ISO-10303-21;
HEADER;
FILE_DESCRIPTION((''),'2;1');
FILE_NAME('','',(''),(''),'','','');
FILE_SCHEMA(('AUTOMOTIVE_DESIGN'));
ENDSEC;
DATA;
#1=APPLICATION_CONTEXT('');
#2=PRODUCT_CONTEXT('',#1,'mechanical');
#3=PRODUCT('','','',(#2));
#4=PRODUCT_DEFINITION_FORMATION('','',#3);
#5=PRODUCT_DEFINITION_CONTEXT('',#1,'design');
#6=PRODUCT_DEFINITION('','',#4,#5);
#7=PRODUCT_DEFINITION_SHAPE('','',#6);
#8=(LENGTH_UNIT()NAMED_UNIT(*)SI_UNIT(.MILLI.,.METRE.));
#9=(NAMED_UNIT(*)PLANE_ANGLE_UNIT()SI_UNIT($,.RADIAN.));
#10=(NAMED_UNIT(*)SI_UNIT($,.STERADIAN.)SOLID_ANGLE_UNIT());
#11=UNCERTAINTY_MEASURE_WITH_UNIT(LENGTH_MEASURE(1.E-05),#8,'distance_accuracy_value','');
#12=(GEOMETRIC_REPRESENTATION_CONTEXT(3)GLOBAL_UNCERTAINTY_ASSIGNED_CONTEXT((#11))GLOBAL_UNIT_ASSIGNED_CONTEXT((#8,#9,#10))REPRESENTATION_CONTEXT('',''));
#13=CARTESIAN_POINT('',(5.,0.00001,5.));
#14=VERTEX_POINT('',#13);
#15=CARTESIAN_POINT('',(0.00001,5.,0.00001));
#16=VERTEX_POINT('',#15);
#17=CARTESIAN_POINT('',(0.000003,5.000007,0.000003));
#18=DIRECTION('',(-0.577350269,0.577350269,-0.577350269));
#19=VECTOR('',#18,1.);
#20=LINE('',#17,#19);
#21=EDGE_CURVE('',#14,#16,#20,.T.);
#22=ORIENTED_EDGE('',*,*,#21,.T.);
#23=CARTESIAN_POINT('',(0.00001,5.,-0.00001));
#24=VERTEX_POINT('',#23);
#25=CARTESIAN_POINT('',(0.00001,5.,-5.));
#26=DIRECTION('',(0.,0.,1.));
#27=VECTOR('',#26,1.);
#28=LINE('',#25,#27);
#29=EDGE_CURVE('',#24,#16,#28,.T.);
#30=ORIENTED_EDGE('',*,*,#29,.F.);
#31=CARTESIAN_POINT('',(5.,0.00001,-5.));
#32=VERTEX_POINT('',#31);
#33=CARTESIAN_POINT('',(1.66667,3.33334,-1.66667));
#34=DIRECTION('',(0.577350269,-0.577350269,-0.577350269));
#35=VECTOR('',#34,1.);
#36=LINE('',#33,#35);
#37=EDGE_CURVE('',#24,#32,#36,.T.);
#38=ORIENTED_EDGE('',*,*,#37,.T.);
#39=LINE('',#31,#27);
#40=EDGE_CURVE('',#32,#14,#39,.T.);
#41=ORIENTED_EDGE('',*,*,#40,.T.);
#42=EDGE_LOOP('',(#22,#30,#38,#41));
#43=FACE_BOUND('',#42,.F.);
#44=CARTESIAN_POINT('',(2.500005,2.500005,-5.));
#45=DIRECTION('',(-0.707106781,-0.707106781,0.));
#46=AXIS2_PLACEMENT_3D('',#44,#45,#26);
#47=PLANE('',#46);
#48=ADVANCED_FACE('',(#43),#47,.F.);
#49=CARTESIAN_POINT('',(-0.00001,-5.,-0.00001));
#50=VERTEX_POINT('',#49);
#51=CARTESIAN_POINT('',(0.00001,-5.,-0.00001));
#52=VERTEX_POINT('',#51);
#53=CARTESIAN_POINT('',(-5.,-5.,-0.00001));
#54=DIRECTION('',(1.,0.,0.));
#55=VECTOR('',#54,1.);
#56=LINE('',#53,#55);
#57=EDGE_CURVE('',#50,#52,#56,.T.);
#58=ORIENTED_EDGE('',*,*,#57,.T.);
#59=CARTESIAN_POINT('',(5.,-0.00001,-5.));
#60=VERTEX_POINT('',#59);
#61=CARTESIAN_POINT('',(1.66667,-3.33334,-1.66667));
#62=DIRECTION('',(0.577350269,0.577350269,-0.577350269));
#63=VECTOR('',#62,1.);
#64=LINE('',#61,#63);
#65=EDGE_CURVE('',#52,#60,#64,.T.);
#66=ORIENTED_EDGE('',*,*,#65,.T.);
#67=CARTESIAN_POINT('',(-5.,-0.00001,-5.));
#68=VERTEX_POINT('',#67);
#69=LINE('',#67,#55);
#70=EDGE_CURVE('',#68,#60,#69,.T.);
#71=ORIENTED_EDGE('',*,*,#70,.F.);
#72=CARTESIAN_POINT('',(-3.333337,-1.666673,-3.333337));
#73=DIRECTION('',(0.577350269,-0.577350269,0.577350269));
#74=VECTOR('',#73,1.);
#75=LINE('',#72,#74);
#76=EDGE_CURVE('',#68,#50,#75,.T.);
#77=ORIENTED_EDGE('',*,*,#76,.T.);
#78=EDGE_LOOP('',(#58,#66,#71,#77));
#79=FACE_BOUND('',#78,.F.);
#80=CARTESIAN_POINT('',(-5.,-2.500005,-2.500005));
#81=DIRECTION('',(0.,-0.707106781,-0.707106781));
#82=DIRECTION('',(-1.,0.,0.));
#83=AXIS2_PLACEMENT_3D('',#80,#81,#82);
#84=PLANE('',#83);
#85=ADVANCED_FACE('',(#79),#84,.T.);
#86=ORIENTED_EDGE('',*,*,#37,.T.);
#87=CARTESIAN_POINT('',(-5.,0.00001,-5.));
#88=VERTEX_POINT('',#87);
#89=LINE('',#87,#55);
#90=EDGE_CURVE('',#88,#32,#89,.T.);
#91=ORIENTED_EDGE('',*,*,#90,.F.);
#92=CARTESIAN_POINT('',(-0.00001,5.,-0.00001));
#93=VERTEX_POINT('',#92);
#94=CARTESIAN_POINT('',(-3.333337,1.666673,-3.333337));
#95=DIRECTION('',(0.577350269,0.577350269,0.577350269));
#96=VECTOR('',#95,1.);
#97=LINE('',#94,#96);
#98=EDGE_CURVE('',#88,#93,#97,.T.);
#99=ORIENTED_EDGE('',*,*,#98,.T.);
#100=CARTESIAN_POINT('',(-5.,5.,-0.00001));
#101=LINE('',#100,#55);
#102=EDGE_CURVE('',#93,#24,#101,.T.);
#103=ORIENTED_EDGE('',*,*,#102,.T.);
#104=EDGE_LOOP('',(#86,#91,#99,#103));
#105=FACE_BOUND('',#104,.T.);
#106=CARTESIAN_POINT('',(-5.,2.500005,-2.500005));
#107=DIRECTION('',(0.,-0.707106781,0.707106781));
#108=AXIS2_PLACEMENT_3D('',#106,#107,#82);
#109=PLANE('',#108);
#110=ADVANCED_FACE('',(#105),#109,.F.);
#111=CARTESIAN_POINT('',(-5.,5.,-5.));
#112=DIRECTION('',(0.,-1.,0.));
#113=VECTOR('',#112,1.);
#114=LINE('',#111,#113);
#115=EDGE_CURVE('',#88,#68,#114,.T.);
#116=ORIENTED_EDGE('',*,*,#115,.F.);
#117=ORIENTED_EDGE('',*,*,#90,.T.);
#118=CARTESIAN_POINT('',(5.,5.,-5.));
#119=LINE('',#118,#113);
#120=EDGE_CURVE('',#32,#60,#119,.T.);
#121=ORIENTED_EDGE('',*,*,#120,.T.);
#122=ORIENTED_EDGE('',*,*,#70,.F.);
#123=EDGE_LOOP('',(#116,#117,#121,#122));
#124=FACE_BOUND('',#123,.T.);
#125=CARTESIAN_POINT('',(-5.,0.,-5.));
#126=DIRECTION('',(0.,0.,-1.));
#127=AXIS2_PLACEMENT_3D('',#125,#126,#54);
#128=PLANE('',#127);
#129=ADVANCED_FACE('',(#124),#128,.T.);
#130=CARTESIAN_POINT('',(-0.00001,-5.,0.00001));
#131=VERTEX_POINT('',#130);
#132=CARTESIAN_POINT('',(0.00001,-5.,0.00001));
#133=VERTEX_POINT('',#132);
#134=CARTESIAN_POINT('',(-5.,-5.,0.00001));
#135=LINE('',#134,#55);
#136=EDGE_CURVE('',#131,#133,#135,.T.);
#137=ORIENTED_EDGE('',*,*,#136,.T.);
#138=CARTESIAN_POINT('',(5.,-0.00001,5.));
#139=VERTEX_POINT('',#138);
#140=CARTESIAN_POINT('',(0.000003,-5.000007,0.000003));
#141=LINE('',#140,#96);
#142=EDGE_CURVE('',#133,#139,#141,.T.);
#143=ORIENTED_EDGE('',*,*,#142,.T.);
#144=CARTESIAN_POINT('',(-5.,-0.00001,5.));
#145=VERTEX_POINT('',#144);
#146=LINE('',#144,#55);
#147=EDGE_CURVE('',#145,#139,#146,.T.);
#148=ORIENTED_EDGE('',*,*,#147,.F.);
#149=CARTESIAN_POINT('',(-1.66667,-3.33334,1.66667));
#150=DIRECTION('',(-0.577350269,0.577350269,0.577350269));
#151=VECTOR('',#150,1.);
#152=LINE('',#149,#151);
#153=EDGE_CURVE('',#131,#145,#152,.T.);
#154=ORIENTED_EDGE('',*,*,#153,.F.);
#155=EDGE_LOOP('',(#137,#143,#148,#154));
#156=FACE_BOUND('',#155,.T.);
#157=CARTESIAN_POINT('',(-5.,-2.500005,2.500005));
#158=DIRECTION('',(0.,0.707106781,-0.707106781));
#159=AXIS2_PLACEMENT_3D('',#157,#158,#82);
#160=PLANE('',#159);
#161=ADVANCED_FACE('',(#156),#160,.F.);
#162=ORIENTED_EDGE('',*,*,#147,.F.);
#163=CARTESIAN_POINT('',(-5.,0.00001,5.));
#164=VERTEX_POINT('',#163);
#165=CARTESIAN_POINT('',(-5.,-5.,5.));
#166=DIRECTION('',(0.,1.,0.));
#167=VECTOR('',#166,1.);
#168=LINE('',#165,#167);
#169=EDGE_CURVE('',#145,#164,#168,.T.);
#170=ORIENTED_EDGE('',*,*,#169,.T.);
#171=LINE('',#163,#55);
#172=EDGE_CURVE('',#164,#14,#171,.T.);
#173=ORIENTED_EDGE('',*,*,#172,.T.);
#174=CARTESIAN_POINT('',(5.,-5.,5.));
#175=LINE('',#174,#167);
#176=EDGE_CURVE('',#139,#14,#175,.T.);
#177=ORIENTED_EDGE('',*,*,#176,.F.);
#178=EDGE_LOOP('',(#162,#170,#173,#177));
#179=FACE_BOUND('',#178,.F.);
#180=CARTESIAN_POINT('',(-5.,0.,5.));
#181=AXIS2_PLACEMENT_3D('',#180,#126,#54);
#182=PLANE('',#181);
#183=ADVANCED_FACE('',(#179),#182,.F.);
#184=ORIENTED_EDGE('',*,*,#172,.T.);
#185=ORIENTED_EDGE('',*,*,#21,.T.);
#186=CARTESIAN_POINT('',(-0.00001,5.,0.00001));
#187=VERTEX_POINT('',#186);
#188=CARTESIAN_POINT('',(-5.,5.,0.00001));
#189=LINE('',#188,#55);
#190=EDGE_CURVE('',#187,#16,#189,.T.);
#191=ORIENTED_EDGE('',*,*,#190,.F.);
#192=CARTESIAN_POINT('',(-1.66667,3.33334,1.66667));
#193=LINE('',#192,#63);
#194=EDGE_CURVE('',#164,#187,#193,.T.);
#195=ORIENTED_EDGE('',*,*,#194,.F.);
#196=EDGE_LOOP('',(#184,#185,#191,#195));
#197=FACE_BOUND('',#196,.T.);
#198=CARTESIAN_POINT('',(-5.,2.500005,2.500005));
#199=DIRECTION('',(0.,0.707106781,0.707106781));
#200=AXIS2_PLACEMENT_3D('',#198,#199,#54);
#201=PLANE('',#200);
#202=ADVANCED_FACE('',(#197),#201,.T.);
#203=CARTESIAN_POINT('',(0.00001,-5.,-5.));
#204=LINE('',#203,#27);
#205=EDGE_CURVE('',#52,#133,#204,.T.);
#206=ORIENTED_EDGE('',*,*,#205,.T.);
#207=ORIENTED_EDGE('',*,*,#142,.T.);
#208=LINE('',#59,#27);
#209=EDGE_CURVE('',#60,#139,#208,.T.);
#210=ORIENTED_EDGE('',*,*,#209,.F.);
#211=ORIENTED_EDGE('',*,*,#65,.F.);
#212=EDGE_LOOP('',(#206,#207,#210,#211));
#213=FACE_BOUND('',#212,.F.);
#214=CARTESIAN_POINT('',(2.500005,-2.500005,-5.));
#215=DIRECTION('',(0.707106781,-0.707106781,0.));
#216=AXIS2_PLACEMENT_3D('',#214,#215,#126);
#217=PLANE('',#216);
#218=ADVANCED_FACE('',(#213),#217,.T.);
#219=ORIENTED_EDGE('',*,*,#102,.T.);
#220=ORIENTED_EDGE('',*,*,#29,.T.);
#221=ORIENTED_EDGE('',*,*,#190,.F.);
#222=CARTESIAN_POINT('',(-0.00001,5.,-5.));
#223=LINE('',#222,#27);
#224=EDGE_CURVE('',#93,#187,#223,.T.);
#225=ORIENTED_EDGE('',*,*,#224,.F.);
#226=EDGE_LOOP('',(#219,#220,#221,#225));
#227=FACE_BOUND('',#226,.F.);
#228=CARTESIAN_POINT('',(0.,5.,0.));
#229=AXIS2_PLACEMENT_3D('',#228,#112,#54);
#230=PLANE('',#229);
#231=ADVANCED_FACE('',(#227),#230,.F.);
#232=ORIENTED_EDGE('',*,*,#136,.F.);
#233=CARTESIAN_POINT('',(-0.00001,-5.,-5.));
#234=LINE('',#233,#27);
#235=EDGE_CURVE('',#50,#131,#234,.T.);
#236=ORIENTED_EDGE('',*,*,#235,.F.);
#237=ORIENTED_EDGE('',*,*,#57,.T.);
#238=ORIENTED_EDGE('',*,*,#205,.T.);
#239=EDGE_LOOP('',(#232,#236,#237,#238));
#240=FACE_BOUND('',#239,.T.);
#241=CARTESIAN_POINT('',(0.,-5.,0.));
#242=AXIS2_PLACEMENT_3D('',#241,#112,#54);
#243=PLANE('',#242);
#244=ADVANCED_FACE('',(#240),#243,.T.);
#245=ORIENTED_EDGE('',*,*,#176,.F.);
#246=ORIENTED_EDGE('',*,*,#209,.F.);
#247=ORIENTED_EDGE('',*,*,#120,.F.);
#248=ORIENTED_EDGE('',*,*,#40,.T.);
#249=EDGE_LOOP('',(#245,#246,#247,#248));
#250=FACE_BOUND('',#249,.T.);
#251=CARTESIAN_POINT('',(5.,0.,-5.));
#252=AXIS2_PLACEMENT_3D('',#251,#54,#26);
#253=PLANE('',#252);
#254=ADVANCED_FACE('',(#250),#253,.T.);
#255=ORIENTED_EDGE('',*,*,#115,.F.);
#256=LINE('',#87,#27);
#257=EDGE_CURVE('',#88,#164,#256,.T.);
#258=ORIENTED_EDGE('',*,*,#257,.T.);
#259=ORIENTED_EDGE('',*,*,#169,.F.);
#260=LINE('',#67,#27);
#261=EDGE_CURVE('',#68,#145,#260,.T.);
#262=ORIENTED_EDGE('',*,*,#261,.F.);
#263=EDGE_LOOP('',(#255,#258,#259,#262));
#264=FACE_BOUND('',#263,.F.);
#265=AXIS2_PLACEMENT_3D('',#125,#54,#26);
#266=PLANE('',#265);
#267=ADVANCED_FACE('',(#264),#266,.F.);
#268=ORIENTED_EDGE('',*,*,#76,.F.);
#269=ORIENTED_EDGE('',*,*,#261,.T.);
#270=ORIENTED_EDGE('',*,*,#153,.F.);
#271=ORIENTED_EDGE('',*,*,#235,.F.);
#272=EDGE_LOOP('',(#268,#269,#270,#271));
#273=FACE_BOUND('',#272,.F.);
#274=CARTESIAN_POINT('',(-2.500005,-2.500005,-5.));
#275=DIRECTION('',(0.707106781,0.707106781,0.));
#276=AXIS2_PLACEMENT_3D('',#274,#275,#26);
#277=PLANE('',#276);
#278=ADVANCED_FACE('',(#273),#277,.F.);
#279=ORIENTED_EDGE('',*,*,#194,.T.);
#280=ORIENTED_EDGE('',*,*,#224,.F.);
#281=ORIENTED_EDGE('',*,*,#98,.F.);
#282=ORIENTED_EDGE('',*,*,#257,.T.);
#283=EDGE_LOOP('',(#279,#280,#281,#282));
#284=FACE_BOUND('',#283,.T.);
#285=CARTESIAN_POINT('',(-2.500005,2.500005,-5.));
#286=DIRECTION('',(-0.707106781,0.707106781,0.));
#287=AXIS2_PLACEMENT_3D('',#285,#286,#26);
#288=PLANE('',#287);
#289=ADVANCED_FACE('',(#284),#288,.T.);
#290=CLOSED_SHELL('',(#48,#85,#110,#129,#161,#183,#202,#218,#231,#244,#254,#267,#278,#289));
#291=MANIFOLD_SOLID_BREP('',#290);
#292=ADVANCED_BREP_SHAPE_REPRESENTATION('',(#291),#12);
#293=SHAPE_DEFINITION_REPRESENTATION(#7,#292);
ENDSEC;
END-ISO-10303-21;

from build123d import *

# Parameters (mm, degrees)
F0_W     = 10
F0_H     = 10
F1_DEPTH = 5
F2_SIZE2 = 4.99999
F2_SIZE  = 4.99999


# Not quite as in the source:
# - a fillet or chamfer is up to 0.001 mm smaller than in the source, because OpenCascade refuses the exact size
# - a feature names something its author has since deleted; it is built from what else it names


with BuildPart() as f1:
    # F0 (on Front) → F1 (new body, symmetric)
    with BuildSketch(Plane.XZ):
        Rectangle(F0_W, F0_H)
    extrude(amount=F1_DEPTH, both=True)

    # F2 (size 5 and 5 in the source; OpenCascade refuses exactly that, so slightly less here)
    f2_edges = [f1.edges().sort_by_distance(p)[0] for p in [
        (0, -5, 5),
        (-5, -5, 0),
        (0, -5, -5),
        (5, -5, 0),
        (0, 5, 5),
        (-5, 5, 0),
        (0, 5, -5),
        (5, 5, 0),
    ]]
    chamfer(f2_edges, length=F2_SIZE, length2=F2_SIZE2)


solid = f1.part
